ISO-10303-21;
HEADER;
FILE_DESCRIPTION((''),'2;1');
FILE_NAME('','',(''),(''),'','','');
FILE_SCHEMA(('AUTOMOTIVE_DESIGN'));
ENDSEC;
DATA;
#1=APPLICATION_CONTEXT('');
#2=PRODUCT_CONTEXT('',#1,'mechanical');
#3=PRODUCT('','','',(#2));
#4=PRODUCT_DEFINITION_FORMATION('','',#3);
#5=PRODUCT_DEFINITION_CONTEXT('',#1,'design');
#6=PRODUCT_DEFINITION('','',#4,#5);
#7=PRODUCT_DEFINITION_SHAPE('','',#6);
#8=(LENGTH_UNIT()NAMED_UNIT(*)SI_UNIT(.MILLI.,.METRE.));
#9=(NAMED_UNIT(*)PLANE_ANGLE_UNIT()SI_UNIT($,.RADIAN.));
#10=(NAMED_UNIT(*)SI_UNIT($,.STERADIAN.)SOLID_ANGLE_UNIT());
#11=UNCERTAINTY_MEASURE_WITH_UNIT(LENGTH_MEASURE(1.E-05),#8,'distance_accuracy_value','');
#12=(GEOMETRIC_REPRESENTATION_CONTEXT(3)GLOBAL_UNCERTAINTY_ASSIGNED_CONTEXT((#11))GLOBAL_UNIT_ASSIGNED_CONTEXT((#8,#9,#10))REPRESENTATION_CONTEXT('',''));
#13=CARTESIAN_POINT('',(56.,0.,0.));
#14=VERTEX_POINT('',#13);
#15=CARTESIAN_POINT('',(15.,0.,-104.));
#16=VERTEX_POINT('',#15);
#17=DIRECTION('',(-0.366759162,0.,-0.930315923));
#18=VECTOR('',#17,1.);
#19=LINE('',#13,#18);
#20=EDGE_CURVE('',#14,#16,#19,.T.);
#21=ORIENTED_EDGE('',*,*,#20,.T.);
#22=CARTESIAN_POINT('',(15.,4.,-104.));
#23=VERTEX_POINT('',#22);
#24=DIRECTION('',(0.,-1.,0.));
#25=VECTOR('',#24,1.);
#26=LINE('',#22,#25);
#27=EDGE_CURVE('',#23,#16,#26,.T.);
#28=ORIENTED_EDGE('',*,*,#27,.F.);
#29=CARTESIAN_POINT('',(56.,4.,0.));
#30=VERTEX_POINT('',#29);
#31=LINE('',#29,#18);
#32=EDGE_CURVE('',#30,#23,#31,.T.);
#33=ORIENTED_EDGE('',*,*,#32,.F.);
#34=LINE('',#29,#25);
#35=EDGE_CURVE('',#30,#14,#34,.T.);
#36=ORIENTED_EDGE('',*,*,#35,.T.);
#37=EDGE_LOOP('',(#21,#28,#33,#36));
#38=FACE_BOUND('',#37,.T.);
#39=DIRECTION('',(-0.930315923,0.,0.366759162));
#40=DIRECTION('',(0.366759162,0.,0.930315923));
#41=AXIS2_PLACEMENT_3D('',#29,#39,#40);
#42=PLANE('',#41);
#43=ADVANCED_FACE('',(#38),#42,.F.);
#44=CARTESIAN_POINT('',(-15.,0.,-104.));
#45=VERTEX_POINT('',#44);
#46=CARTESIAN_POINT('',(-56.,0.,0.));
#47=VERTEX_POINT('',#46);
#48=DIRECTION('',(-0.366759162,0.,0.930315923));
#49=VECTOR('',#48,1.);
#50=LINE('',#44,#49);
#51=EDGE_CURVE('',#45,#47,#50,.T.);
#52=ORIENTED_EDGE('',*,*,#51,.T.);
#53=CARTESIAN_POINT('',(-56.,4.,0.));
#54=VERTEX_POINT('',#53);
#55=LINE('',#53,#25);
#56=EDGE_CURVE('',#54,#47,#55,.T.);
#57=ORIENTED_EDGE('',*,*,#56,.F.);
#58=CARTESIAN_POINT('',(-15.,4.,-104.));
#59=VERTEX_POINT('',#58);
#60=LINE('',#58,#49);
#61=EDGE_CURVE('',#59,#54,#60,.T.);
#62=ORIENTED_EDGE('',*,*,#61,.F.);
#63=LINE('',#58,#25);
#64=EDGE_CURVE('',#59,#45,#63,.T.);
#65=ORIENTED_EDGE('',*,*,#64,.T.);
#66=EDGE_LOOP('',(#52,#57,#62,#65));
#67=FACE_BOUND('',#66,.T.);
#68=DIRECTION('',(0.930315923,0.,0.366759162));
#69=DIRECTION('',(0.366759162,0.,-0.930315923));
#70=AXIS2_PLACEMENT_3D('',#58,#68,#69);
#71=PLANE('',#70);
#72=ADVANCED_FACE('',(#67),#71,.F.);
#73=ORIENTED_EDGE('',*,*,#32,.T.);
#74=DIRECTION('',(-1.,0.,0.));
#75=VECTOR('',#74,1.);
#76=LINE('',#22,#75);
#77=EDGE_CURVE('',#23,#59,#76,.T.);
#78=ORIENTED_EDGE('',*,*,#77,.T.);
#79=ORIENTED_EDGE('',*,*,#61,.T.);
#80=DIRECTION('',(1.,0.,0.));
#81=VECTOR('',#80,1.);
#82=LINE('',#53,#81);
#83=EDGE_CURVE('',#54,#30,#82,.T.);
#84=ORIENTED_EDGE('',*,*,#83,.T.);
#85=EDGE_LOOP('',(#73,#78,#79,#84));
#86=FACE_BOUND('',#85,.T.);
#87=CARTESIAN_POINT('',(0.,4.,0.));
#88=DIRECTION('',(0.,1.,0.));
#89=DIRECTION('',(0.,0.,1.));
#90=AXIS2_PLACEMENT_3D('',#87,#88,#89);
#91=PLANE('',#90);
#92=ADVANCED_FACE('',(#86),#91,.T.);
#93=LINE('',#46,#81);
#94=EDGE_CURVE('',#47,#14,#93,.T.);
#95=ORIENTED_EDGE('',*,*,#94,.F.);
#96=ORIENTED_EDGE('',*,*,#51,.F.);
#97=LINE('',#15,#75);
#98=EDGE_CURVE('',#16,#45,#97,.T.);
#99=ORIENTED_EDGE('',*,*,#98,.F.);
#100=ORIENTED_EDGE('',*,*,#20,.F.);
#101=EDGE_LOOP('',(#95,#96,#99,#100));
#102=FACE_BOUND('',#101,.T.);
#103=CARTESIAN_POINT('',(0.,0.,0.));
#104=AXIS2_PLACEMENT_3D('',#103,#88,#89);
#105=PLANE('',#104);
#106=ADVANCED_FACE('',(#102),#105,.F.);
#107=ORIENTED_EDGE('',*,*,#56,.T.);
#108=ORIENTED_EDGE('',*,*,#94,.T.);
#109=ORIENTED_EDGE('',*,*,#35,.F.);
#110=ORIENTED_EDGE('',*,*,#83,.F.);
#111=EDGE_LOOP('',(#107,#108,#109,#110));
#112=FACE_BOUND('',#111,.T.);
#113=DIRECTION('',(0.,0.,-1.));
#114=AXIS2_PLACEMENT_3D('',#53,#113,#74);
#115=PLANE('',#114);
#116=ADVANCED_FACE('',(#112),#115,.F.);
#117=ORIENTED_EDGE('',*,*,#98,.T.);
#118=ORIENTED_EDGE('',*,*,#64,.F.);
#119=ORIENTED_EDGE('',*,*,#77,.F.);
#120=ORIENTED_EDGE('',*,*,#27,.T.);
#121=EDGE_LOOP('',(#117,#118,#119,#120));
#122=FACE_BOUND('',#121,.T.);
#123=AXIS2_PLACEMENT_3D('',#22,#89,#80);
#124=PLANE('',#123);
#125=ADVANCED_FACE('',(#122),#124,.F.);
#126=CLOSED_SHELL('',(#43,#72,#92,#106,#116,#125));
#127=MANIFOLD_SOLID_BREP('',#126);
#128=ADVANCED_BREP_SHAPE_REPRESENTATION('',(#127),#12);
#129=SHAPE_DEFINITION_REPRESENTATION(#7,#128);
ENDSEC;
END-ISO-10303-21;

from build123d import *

# Parameters (mm, degrees)
SM_BASE_FLANGE_1_DEPTH = 4


# Sheet-metal steps are written as plain solids
with BuildPart() as part:
    # Sketch 1 → Базовая кромка1 (new body)
    with BuildSketch(Plane(origin=(0, 0, 0), x_dir=(1, 0, 0), z_dir=(0, 1, 0))):
        Polygon((-56, 0), (56, 0), (15, 104), (-15, 104), align=None)
    extrude(amount=SM_BASE_FLANGE_1_DEPTH)


solid = part.part
